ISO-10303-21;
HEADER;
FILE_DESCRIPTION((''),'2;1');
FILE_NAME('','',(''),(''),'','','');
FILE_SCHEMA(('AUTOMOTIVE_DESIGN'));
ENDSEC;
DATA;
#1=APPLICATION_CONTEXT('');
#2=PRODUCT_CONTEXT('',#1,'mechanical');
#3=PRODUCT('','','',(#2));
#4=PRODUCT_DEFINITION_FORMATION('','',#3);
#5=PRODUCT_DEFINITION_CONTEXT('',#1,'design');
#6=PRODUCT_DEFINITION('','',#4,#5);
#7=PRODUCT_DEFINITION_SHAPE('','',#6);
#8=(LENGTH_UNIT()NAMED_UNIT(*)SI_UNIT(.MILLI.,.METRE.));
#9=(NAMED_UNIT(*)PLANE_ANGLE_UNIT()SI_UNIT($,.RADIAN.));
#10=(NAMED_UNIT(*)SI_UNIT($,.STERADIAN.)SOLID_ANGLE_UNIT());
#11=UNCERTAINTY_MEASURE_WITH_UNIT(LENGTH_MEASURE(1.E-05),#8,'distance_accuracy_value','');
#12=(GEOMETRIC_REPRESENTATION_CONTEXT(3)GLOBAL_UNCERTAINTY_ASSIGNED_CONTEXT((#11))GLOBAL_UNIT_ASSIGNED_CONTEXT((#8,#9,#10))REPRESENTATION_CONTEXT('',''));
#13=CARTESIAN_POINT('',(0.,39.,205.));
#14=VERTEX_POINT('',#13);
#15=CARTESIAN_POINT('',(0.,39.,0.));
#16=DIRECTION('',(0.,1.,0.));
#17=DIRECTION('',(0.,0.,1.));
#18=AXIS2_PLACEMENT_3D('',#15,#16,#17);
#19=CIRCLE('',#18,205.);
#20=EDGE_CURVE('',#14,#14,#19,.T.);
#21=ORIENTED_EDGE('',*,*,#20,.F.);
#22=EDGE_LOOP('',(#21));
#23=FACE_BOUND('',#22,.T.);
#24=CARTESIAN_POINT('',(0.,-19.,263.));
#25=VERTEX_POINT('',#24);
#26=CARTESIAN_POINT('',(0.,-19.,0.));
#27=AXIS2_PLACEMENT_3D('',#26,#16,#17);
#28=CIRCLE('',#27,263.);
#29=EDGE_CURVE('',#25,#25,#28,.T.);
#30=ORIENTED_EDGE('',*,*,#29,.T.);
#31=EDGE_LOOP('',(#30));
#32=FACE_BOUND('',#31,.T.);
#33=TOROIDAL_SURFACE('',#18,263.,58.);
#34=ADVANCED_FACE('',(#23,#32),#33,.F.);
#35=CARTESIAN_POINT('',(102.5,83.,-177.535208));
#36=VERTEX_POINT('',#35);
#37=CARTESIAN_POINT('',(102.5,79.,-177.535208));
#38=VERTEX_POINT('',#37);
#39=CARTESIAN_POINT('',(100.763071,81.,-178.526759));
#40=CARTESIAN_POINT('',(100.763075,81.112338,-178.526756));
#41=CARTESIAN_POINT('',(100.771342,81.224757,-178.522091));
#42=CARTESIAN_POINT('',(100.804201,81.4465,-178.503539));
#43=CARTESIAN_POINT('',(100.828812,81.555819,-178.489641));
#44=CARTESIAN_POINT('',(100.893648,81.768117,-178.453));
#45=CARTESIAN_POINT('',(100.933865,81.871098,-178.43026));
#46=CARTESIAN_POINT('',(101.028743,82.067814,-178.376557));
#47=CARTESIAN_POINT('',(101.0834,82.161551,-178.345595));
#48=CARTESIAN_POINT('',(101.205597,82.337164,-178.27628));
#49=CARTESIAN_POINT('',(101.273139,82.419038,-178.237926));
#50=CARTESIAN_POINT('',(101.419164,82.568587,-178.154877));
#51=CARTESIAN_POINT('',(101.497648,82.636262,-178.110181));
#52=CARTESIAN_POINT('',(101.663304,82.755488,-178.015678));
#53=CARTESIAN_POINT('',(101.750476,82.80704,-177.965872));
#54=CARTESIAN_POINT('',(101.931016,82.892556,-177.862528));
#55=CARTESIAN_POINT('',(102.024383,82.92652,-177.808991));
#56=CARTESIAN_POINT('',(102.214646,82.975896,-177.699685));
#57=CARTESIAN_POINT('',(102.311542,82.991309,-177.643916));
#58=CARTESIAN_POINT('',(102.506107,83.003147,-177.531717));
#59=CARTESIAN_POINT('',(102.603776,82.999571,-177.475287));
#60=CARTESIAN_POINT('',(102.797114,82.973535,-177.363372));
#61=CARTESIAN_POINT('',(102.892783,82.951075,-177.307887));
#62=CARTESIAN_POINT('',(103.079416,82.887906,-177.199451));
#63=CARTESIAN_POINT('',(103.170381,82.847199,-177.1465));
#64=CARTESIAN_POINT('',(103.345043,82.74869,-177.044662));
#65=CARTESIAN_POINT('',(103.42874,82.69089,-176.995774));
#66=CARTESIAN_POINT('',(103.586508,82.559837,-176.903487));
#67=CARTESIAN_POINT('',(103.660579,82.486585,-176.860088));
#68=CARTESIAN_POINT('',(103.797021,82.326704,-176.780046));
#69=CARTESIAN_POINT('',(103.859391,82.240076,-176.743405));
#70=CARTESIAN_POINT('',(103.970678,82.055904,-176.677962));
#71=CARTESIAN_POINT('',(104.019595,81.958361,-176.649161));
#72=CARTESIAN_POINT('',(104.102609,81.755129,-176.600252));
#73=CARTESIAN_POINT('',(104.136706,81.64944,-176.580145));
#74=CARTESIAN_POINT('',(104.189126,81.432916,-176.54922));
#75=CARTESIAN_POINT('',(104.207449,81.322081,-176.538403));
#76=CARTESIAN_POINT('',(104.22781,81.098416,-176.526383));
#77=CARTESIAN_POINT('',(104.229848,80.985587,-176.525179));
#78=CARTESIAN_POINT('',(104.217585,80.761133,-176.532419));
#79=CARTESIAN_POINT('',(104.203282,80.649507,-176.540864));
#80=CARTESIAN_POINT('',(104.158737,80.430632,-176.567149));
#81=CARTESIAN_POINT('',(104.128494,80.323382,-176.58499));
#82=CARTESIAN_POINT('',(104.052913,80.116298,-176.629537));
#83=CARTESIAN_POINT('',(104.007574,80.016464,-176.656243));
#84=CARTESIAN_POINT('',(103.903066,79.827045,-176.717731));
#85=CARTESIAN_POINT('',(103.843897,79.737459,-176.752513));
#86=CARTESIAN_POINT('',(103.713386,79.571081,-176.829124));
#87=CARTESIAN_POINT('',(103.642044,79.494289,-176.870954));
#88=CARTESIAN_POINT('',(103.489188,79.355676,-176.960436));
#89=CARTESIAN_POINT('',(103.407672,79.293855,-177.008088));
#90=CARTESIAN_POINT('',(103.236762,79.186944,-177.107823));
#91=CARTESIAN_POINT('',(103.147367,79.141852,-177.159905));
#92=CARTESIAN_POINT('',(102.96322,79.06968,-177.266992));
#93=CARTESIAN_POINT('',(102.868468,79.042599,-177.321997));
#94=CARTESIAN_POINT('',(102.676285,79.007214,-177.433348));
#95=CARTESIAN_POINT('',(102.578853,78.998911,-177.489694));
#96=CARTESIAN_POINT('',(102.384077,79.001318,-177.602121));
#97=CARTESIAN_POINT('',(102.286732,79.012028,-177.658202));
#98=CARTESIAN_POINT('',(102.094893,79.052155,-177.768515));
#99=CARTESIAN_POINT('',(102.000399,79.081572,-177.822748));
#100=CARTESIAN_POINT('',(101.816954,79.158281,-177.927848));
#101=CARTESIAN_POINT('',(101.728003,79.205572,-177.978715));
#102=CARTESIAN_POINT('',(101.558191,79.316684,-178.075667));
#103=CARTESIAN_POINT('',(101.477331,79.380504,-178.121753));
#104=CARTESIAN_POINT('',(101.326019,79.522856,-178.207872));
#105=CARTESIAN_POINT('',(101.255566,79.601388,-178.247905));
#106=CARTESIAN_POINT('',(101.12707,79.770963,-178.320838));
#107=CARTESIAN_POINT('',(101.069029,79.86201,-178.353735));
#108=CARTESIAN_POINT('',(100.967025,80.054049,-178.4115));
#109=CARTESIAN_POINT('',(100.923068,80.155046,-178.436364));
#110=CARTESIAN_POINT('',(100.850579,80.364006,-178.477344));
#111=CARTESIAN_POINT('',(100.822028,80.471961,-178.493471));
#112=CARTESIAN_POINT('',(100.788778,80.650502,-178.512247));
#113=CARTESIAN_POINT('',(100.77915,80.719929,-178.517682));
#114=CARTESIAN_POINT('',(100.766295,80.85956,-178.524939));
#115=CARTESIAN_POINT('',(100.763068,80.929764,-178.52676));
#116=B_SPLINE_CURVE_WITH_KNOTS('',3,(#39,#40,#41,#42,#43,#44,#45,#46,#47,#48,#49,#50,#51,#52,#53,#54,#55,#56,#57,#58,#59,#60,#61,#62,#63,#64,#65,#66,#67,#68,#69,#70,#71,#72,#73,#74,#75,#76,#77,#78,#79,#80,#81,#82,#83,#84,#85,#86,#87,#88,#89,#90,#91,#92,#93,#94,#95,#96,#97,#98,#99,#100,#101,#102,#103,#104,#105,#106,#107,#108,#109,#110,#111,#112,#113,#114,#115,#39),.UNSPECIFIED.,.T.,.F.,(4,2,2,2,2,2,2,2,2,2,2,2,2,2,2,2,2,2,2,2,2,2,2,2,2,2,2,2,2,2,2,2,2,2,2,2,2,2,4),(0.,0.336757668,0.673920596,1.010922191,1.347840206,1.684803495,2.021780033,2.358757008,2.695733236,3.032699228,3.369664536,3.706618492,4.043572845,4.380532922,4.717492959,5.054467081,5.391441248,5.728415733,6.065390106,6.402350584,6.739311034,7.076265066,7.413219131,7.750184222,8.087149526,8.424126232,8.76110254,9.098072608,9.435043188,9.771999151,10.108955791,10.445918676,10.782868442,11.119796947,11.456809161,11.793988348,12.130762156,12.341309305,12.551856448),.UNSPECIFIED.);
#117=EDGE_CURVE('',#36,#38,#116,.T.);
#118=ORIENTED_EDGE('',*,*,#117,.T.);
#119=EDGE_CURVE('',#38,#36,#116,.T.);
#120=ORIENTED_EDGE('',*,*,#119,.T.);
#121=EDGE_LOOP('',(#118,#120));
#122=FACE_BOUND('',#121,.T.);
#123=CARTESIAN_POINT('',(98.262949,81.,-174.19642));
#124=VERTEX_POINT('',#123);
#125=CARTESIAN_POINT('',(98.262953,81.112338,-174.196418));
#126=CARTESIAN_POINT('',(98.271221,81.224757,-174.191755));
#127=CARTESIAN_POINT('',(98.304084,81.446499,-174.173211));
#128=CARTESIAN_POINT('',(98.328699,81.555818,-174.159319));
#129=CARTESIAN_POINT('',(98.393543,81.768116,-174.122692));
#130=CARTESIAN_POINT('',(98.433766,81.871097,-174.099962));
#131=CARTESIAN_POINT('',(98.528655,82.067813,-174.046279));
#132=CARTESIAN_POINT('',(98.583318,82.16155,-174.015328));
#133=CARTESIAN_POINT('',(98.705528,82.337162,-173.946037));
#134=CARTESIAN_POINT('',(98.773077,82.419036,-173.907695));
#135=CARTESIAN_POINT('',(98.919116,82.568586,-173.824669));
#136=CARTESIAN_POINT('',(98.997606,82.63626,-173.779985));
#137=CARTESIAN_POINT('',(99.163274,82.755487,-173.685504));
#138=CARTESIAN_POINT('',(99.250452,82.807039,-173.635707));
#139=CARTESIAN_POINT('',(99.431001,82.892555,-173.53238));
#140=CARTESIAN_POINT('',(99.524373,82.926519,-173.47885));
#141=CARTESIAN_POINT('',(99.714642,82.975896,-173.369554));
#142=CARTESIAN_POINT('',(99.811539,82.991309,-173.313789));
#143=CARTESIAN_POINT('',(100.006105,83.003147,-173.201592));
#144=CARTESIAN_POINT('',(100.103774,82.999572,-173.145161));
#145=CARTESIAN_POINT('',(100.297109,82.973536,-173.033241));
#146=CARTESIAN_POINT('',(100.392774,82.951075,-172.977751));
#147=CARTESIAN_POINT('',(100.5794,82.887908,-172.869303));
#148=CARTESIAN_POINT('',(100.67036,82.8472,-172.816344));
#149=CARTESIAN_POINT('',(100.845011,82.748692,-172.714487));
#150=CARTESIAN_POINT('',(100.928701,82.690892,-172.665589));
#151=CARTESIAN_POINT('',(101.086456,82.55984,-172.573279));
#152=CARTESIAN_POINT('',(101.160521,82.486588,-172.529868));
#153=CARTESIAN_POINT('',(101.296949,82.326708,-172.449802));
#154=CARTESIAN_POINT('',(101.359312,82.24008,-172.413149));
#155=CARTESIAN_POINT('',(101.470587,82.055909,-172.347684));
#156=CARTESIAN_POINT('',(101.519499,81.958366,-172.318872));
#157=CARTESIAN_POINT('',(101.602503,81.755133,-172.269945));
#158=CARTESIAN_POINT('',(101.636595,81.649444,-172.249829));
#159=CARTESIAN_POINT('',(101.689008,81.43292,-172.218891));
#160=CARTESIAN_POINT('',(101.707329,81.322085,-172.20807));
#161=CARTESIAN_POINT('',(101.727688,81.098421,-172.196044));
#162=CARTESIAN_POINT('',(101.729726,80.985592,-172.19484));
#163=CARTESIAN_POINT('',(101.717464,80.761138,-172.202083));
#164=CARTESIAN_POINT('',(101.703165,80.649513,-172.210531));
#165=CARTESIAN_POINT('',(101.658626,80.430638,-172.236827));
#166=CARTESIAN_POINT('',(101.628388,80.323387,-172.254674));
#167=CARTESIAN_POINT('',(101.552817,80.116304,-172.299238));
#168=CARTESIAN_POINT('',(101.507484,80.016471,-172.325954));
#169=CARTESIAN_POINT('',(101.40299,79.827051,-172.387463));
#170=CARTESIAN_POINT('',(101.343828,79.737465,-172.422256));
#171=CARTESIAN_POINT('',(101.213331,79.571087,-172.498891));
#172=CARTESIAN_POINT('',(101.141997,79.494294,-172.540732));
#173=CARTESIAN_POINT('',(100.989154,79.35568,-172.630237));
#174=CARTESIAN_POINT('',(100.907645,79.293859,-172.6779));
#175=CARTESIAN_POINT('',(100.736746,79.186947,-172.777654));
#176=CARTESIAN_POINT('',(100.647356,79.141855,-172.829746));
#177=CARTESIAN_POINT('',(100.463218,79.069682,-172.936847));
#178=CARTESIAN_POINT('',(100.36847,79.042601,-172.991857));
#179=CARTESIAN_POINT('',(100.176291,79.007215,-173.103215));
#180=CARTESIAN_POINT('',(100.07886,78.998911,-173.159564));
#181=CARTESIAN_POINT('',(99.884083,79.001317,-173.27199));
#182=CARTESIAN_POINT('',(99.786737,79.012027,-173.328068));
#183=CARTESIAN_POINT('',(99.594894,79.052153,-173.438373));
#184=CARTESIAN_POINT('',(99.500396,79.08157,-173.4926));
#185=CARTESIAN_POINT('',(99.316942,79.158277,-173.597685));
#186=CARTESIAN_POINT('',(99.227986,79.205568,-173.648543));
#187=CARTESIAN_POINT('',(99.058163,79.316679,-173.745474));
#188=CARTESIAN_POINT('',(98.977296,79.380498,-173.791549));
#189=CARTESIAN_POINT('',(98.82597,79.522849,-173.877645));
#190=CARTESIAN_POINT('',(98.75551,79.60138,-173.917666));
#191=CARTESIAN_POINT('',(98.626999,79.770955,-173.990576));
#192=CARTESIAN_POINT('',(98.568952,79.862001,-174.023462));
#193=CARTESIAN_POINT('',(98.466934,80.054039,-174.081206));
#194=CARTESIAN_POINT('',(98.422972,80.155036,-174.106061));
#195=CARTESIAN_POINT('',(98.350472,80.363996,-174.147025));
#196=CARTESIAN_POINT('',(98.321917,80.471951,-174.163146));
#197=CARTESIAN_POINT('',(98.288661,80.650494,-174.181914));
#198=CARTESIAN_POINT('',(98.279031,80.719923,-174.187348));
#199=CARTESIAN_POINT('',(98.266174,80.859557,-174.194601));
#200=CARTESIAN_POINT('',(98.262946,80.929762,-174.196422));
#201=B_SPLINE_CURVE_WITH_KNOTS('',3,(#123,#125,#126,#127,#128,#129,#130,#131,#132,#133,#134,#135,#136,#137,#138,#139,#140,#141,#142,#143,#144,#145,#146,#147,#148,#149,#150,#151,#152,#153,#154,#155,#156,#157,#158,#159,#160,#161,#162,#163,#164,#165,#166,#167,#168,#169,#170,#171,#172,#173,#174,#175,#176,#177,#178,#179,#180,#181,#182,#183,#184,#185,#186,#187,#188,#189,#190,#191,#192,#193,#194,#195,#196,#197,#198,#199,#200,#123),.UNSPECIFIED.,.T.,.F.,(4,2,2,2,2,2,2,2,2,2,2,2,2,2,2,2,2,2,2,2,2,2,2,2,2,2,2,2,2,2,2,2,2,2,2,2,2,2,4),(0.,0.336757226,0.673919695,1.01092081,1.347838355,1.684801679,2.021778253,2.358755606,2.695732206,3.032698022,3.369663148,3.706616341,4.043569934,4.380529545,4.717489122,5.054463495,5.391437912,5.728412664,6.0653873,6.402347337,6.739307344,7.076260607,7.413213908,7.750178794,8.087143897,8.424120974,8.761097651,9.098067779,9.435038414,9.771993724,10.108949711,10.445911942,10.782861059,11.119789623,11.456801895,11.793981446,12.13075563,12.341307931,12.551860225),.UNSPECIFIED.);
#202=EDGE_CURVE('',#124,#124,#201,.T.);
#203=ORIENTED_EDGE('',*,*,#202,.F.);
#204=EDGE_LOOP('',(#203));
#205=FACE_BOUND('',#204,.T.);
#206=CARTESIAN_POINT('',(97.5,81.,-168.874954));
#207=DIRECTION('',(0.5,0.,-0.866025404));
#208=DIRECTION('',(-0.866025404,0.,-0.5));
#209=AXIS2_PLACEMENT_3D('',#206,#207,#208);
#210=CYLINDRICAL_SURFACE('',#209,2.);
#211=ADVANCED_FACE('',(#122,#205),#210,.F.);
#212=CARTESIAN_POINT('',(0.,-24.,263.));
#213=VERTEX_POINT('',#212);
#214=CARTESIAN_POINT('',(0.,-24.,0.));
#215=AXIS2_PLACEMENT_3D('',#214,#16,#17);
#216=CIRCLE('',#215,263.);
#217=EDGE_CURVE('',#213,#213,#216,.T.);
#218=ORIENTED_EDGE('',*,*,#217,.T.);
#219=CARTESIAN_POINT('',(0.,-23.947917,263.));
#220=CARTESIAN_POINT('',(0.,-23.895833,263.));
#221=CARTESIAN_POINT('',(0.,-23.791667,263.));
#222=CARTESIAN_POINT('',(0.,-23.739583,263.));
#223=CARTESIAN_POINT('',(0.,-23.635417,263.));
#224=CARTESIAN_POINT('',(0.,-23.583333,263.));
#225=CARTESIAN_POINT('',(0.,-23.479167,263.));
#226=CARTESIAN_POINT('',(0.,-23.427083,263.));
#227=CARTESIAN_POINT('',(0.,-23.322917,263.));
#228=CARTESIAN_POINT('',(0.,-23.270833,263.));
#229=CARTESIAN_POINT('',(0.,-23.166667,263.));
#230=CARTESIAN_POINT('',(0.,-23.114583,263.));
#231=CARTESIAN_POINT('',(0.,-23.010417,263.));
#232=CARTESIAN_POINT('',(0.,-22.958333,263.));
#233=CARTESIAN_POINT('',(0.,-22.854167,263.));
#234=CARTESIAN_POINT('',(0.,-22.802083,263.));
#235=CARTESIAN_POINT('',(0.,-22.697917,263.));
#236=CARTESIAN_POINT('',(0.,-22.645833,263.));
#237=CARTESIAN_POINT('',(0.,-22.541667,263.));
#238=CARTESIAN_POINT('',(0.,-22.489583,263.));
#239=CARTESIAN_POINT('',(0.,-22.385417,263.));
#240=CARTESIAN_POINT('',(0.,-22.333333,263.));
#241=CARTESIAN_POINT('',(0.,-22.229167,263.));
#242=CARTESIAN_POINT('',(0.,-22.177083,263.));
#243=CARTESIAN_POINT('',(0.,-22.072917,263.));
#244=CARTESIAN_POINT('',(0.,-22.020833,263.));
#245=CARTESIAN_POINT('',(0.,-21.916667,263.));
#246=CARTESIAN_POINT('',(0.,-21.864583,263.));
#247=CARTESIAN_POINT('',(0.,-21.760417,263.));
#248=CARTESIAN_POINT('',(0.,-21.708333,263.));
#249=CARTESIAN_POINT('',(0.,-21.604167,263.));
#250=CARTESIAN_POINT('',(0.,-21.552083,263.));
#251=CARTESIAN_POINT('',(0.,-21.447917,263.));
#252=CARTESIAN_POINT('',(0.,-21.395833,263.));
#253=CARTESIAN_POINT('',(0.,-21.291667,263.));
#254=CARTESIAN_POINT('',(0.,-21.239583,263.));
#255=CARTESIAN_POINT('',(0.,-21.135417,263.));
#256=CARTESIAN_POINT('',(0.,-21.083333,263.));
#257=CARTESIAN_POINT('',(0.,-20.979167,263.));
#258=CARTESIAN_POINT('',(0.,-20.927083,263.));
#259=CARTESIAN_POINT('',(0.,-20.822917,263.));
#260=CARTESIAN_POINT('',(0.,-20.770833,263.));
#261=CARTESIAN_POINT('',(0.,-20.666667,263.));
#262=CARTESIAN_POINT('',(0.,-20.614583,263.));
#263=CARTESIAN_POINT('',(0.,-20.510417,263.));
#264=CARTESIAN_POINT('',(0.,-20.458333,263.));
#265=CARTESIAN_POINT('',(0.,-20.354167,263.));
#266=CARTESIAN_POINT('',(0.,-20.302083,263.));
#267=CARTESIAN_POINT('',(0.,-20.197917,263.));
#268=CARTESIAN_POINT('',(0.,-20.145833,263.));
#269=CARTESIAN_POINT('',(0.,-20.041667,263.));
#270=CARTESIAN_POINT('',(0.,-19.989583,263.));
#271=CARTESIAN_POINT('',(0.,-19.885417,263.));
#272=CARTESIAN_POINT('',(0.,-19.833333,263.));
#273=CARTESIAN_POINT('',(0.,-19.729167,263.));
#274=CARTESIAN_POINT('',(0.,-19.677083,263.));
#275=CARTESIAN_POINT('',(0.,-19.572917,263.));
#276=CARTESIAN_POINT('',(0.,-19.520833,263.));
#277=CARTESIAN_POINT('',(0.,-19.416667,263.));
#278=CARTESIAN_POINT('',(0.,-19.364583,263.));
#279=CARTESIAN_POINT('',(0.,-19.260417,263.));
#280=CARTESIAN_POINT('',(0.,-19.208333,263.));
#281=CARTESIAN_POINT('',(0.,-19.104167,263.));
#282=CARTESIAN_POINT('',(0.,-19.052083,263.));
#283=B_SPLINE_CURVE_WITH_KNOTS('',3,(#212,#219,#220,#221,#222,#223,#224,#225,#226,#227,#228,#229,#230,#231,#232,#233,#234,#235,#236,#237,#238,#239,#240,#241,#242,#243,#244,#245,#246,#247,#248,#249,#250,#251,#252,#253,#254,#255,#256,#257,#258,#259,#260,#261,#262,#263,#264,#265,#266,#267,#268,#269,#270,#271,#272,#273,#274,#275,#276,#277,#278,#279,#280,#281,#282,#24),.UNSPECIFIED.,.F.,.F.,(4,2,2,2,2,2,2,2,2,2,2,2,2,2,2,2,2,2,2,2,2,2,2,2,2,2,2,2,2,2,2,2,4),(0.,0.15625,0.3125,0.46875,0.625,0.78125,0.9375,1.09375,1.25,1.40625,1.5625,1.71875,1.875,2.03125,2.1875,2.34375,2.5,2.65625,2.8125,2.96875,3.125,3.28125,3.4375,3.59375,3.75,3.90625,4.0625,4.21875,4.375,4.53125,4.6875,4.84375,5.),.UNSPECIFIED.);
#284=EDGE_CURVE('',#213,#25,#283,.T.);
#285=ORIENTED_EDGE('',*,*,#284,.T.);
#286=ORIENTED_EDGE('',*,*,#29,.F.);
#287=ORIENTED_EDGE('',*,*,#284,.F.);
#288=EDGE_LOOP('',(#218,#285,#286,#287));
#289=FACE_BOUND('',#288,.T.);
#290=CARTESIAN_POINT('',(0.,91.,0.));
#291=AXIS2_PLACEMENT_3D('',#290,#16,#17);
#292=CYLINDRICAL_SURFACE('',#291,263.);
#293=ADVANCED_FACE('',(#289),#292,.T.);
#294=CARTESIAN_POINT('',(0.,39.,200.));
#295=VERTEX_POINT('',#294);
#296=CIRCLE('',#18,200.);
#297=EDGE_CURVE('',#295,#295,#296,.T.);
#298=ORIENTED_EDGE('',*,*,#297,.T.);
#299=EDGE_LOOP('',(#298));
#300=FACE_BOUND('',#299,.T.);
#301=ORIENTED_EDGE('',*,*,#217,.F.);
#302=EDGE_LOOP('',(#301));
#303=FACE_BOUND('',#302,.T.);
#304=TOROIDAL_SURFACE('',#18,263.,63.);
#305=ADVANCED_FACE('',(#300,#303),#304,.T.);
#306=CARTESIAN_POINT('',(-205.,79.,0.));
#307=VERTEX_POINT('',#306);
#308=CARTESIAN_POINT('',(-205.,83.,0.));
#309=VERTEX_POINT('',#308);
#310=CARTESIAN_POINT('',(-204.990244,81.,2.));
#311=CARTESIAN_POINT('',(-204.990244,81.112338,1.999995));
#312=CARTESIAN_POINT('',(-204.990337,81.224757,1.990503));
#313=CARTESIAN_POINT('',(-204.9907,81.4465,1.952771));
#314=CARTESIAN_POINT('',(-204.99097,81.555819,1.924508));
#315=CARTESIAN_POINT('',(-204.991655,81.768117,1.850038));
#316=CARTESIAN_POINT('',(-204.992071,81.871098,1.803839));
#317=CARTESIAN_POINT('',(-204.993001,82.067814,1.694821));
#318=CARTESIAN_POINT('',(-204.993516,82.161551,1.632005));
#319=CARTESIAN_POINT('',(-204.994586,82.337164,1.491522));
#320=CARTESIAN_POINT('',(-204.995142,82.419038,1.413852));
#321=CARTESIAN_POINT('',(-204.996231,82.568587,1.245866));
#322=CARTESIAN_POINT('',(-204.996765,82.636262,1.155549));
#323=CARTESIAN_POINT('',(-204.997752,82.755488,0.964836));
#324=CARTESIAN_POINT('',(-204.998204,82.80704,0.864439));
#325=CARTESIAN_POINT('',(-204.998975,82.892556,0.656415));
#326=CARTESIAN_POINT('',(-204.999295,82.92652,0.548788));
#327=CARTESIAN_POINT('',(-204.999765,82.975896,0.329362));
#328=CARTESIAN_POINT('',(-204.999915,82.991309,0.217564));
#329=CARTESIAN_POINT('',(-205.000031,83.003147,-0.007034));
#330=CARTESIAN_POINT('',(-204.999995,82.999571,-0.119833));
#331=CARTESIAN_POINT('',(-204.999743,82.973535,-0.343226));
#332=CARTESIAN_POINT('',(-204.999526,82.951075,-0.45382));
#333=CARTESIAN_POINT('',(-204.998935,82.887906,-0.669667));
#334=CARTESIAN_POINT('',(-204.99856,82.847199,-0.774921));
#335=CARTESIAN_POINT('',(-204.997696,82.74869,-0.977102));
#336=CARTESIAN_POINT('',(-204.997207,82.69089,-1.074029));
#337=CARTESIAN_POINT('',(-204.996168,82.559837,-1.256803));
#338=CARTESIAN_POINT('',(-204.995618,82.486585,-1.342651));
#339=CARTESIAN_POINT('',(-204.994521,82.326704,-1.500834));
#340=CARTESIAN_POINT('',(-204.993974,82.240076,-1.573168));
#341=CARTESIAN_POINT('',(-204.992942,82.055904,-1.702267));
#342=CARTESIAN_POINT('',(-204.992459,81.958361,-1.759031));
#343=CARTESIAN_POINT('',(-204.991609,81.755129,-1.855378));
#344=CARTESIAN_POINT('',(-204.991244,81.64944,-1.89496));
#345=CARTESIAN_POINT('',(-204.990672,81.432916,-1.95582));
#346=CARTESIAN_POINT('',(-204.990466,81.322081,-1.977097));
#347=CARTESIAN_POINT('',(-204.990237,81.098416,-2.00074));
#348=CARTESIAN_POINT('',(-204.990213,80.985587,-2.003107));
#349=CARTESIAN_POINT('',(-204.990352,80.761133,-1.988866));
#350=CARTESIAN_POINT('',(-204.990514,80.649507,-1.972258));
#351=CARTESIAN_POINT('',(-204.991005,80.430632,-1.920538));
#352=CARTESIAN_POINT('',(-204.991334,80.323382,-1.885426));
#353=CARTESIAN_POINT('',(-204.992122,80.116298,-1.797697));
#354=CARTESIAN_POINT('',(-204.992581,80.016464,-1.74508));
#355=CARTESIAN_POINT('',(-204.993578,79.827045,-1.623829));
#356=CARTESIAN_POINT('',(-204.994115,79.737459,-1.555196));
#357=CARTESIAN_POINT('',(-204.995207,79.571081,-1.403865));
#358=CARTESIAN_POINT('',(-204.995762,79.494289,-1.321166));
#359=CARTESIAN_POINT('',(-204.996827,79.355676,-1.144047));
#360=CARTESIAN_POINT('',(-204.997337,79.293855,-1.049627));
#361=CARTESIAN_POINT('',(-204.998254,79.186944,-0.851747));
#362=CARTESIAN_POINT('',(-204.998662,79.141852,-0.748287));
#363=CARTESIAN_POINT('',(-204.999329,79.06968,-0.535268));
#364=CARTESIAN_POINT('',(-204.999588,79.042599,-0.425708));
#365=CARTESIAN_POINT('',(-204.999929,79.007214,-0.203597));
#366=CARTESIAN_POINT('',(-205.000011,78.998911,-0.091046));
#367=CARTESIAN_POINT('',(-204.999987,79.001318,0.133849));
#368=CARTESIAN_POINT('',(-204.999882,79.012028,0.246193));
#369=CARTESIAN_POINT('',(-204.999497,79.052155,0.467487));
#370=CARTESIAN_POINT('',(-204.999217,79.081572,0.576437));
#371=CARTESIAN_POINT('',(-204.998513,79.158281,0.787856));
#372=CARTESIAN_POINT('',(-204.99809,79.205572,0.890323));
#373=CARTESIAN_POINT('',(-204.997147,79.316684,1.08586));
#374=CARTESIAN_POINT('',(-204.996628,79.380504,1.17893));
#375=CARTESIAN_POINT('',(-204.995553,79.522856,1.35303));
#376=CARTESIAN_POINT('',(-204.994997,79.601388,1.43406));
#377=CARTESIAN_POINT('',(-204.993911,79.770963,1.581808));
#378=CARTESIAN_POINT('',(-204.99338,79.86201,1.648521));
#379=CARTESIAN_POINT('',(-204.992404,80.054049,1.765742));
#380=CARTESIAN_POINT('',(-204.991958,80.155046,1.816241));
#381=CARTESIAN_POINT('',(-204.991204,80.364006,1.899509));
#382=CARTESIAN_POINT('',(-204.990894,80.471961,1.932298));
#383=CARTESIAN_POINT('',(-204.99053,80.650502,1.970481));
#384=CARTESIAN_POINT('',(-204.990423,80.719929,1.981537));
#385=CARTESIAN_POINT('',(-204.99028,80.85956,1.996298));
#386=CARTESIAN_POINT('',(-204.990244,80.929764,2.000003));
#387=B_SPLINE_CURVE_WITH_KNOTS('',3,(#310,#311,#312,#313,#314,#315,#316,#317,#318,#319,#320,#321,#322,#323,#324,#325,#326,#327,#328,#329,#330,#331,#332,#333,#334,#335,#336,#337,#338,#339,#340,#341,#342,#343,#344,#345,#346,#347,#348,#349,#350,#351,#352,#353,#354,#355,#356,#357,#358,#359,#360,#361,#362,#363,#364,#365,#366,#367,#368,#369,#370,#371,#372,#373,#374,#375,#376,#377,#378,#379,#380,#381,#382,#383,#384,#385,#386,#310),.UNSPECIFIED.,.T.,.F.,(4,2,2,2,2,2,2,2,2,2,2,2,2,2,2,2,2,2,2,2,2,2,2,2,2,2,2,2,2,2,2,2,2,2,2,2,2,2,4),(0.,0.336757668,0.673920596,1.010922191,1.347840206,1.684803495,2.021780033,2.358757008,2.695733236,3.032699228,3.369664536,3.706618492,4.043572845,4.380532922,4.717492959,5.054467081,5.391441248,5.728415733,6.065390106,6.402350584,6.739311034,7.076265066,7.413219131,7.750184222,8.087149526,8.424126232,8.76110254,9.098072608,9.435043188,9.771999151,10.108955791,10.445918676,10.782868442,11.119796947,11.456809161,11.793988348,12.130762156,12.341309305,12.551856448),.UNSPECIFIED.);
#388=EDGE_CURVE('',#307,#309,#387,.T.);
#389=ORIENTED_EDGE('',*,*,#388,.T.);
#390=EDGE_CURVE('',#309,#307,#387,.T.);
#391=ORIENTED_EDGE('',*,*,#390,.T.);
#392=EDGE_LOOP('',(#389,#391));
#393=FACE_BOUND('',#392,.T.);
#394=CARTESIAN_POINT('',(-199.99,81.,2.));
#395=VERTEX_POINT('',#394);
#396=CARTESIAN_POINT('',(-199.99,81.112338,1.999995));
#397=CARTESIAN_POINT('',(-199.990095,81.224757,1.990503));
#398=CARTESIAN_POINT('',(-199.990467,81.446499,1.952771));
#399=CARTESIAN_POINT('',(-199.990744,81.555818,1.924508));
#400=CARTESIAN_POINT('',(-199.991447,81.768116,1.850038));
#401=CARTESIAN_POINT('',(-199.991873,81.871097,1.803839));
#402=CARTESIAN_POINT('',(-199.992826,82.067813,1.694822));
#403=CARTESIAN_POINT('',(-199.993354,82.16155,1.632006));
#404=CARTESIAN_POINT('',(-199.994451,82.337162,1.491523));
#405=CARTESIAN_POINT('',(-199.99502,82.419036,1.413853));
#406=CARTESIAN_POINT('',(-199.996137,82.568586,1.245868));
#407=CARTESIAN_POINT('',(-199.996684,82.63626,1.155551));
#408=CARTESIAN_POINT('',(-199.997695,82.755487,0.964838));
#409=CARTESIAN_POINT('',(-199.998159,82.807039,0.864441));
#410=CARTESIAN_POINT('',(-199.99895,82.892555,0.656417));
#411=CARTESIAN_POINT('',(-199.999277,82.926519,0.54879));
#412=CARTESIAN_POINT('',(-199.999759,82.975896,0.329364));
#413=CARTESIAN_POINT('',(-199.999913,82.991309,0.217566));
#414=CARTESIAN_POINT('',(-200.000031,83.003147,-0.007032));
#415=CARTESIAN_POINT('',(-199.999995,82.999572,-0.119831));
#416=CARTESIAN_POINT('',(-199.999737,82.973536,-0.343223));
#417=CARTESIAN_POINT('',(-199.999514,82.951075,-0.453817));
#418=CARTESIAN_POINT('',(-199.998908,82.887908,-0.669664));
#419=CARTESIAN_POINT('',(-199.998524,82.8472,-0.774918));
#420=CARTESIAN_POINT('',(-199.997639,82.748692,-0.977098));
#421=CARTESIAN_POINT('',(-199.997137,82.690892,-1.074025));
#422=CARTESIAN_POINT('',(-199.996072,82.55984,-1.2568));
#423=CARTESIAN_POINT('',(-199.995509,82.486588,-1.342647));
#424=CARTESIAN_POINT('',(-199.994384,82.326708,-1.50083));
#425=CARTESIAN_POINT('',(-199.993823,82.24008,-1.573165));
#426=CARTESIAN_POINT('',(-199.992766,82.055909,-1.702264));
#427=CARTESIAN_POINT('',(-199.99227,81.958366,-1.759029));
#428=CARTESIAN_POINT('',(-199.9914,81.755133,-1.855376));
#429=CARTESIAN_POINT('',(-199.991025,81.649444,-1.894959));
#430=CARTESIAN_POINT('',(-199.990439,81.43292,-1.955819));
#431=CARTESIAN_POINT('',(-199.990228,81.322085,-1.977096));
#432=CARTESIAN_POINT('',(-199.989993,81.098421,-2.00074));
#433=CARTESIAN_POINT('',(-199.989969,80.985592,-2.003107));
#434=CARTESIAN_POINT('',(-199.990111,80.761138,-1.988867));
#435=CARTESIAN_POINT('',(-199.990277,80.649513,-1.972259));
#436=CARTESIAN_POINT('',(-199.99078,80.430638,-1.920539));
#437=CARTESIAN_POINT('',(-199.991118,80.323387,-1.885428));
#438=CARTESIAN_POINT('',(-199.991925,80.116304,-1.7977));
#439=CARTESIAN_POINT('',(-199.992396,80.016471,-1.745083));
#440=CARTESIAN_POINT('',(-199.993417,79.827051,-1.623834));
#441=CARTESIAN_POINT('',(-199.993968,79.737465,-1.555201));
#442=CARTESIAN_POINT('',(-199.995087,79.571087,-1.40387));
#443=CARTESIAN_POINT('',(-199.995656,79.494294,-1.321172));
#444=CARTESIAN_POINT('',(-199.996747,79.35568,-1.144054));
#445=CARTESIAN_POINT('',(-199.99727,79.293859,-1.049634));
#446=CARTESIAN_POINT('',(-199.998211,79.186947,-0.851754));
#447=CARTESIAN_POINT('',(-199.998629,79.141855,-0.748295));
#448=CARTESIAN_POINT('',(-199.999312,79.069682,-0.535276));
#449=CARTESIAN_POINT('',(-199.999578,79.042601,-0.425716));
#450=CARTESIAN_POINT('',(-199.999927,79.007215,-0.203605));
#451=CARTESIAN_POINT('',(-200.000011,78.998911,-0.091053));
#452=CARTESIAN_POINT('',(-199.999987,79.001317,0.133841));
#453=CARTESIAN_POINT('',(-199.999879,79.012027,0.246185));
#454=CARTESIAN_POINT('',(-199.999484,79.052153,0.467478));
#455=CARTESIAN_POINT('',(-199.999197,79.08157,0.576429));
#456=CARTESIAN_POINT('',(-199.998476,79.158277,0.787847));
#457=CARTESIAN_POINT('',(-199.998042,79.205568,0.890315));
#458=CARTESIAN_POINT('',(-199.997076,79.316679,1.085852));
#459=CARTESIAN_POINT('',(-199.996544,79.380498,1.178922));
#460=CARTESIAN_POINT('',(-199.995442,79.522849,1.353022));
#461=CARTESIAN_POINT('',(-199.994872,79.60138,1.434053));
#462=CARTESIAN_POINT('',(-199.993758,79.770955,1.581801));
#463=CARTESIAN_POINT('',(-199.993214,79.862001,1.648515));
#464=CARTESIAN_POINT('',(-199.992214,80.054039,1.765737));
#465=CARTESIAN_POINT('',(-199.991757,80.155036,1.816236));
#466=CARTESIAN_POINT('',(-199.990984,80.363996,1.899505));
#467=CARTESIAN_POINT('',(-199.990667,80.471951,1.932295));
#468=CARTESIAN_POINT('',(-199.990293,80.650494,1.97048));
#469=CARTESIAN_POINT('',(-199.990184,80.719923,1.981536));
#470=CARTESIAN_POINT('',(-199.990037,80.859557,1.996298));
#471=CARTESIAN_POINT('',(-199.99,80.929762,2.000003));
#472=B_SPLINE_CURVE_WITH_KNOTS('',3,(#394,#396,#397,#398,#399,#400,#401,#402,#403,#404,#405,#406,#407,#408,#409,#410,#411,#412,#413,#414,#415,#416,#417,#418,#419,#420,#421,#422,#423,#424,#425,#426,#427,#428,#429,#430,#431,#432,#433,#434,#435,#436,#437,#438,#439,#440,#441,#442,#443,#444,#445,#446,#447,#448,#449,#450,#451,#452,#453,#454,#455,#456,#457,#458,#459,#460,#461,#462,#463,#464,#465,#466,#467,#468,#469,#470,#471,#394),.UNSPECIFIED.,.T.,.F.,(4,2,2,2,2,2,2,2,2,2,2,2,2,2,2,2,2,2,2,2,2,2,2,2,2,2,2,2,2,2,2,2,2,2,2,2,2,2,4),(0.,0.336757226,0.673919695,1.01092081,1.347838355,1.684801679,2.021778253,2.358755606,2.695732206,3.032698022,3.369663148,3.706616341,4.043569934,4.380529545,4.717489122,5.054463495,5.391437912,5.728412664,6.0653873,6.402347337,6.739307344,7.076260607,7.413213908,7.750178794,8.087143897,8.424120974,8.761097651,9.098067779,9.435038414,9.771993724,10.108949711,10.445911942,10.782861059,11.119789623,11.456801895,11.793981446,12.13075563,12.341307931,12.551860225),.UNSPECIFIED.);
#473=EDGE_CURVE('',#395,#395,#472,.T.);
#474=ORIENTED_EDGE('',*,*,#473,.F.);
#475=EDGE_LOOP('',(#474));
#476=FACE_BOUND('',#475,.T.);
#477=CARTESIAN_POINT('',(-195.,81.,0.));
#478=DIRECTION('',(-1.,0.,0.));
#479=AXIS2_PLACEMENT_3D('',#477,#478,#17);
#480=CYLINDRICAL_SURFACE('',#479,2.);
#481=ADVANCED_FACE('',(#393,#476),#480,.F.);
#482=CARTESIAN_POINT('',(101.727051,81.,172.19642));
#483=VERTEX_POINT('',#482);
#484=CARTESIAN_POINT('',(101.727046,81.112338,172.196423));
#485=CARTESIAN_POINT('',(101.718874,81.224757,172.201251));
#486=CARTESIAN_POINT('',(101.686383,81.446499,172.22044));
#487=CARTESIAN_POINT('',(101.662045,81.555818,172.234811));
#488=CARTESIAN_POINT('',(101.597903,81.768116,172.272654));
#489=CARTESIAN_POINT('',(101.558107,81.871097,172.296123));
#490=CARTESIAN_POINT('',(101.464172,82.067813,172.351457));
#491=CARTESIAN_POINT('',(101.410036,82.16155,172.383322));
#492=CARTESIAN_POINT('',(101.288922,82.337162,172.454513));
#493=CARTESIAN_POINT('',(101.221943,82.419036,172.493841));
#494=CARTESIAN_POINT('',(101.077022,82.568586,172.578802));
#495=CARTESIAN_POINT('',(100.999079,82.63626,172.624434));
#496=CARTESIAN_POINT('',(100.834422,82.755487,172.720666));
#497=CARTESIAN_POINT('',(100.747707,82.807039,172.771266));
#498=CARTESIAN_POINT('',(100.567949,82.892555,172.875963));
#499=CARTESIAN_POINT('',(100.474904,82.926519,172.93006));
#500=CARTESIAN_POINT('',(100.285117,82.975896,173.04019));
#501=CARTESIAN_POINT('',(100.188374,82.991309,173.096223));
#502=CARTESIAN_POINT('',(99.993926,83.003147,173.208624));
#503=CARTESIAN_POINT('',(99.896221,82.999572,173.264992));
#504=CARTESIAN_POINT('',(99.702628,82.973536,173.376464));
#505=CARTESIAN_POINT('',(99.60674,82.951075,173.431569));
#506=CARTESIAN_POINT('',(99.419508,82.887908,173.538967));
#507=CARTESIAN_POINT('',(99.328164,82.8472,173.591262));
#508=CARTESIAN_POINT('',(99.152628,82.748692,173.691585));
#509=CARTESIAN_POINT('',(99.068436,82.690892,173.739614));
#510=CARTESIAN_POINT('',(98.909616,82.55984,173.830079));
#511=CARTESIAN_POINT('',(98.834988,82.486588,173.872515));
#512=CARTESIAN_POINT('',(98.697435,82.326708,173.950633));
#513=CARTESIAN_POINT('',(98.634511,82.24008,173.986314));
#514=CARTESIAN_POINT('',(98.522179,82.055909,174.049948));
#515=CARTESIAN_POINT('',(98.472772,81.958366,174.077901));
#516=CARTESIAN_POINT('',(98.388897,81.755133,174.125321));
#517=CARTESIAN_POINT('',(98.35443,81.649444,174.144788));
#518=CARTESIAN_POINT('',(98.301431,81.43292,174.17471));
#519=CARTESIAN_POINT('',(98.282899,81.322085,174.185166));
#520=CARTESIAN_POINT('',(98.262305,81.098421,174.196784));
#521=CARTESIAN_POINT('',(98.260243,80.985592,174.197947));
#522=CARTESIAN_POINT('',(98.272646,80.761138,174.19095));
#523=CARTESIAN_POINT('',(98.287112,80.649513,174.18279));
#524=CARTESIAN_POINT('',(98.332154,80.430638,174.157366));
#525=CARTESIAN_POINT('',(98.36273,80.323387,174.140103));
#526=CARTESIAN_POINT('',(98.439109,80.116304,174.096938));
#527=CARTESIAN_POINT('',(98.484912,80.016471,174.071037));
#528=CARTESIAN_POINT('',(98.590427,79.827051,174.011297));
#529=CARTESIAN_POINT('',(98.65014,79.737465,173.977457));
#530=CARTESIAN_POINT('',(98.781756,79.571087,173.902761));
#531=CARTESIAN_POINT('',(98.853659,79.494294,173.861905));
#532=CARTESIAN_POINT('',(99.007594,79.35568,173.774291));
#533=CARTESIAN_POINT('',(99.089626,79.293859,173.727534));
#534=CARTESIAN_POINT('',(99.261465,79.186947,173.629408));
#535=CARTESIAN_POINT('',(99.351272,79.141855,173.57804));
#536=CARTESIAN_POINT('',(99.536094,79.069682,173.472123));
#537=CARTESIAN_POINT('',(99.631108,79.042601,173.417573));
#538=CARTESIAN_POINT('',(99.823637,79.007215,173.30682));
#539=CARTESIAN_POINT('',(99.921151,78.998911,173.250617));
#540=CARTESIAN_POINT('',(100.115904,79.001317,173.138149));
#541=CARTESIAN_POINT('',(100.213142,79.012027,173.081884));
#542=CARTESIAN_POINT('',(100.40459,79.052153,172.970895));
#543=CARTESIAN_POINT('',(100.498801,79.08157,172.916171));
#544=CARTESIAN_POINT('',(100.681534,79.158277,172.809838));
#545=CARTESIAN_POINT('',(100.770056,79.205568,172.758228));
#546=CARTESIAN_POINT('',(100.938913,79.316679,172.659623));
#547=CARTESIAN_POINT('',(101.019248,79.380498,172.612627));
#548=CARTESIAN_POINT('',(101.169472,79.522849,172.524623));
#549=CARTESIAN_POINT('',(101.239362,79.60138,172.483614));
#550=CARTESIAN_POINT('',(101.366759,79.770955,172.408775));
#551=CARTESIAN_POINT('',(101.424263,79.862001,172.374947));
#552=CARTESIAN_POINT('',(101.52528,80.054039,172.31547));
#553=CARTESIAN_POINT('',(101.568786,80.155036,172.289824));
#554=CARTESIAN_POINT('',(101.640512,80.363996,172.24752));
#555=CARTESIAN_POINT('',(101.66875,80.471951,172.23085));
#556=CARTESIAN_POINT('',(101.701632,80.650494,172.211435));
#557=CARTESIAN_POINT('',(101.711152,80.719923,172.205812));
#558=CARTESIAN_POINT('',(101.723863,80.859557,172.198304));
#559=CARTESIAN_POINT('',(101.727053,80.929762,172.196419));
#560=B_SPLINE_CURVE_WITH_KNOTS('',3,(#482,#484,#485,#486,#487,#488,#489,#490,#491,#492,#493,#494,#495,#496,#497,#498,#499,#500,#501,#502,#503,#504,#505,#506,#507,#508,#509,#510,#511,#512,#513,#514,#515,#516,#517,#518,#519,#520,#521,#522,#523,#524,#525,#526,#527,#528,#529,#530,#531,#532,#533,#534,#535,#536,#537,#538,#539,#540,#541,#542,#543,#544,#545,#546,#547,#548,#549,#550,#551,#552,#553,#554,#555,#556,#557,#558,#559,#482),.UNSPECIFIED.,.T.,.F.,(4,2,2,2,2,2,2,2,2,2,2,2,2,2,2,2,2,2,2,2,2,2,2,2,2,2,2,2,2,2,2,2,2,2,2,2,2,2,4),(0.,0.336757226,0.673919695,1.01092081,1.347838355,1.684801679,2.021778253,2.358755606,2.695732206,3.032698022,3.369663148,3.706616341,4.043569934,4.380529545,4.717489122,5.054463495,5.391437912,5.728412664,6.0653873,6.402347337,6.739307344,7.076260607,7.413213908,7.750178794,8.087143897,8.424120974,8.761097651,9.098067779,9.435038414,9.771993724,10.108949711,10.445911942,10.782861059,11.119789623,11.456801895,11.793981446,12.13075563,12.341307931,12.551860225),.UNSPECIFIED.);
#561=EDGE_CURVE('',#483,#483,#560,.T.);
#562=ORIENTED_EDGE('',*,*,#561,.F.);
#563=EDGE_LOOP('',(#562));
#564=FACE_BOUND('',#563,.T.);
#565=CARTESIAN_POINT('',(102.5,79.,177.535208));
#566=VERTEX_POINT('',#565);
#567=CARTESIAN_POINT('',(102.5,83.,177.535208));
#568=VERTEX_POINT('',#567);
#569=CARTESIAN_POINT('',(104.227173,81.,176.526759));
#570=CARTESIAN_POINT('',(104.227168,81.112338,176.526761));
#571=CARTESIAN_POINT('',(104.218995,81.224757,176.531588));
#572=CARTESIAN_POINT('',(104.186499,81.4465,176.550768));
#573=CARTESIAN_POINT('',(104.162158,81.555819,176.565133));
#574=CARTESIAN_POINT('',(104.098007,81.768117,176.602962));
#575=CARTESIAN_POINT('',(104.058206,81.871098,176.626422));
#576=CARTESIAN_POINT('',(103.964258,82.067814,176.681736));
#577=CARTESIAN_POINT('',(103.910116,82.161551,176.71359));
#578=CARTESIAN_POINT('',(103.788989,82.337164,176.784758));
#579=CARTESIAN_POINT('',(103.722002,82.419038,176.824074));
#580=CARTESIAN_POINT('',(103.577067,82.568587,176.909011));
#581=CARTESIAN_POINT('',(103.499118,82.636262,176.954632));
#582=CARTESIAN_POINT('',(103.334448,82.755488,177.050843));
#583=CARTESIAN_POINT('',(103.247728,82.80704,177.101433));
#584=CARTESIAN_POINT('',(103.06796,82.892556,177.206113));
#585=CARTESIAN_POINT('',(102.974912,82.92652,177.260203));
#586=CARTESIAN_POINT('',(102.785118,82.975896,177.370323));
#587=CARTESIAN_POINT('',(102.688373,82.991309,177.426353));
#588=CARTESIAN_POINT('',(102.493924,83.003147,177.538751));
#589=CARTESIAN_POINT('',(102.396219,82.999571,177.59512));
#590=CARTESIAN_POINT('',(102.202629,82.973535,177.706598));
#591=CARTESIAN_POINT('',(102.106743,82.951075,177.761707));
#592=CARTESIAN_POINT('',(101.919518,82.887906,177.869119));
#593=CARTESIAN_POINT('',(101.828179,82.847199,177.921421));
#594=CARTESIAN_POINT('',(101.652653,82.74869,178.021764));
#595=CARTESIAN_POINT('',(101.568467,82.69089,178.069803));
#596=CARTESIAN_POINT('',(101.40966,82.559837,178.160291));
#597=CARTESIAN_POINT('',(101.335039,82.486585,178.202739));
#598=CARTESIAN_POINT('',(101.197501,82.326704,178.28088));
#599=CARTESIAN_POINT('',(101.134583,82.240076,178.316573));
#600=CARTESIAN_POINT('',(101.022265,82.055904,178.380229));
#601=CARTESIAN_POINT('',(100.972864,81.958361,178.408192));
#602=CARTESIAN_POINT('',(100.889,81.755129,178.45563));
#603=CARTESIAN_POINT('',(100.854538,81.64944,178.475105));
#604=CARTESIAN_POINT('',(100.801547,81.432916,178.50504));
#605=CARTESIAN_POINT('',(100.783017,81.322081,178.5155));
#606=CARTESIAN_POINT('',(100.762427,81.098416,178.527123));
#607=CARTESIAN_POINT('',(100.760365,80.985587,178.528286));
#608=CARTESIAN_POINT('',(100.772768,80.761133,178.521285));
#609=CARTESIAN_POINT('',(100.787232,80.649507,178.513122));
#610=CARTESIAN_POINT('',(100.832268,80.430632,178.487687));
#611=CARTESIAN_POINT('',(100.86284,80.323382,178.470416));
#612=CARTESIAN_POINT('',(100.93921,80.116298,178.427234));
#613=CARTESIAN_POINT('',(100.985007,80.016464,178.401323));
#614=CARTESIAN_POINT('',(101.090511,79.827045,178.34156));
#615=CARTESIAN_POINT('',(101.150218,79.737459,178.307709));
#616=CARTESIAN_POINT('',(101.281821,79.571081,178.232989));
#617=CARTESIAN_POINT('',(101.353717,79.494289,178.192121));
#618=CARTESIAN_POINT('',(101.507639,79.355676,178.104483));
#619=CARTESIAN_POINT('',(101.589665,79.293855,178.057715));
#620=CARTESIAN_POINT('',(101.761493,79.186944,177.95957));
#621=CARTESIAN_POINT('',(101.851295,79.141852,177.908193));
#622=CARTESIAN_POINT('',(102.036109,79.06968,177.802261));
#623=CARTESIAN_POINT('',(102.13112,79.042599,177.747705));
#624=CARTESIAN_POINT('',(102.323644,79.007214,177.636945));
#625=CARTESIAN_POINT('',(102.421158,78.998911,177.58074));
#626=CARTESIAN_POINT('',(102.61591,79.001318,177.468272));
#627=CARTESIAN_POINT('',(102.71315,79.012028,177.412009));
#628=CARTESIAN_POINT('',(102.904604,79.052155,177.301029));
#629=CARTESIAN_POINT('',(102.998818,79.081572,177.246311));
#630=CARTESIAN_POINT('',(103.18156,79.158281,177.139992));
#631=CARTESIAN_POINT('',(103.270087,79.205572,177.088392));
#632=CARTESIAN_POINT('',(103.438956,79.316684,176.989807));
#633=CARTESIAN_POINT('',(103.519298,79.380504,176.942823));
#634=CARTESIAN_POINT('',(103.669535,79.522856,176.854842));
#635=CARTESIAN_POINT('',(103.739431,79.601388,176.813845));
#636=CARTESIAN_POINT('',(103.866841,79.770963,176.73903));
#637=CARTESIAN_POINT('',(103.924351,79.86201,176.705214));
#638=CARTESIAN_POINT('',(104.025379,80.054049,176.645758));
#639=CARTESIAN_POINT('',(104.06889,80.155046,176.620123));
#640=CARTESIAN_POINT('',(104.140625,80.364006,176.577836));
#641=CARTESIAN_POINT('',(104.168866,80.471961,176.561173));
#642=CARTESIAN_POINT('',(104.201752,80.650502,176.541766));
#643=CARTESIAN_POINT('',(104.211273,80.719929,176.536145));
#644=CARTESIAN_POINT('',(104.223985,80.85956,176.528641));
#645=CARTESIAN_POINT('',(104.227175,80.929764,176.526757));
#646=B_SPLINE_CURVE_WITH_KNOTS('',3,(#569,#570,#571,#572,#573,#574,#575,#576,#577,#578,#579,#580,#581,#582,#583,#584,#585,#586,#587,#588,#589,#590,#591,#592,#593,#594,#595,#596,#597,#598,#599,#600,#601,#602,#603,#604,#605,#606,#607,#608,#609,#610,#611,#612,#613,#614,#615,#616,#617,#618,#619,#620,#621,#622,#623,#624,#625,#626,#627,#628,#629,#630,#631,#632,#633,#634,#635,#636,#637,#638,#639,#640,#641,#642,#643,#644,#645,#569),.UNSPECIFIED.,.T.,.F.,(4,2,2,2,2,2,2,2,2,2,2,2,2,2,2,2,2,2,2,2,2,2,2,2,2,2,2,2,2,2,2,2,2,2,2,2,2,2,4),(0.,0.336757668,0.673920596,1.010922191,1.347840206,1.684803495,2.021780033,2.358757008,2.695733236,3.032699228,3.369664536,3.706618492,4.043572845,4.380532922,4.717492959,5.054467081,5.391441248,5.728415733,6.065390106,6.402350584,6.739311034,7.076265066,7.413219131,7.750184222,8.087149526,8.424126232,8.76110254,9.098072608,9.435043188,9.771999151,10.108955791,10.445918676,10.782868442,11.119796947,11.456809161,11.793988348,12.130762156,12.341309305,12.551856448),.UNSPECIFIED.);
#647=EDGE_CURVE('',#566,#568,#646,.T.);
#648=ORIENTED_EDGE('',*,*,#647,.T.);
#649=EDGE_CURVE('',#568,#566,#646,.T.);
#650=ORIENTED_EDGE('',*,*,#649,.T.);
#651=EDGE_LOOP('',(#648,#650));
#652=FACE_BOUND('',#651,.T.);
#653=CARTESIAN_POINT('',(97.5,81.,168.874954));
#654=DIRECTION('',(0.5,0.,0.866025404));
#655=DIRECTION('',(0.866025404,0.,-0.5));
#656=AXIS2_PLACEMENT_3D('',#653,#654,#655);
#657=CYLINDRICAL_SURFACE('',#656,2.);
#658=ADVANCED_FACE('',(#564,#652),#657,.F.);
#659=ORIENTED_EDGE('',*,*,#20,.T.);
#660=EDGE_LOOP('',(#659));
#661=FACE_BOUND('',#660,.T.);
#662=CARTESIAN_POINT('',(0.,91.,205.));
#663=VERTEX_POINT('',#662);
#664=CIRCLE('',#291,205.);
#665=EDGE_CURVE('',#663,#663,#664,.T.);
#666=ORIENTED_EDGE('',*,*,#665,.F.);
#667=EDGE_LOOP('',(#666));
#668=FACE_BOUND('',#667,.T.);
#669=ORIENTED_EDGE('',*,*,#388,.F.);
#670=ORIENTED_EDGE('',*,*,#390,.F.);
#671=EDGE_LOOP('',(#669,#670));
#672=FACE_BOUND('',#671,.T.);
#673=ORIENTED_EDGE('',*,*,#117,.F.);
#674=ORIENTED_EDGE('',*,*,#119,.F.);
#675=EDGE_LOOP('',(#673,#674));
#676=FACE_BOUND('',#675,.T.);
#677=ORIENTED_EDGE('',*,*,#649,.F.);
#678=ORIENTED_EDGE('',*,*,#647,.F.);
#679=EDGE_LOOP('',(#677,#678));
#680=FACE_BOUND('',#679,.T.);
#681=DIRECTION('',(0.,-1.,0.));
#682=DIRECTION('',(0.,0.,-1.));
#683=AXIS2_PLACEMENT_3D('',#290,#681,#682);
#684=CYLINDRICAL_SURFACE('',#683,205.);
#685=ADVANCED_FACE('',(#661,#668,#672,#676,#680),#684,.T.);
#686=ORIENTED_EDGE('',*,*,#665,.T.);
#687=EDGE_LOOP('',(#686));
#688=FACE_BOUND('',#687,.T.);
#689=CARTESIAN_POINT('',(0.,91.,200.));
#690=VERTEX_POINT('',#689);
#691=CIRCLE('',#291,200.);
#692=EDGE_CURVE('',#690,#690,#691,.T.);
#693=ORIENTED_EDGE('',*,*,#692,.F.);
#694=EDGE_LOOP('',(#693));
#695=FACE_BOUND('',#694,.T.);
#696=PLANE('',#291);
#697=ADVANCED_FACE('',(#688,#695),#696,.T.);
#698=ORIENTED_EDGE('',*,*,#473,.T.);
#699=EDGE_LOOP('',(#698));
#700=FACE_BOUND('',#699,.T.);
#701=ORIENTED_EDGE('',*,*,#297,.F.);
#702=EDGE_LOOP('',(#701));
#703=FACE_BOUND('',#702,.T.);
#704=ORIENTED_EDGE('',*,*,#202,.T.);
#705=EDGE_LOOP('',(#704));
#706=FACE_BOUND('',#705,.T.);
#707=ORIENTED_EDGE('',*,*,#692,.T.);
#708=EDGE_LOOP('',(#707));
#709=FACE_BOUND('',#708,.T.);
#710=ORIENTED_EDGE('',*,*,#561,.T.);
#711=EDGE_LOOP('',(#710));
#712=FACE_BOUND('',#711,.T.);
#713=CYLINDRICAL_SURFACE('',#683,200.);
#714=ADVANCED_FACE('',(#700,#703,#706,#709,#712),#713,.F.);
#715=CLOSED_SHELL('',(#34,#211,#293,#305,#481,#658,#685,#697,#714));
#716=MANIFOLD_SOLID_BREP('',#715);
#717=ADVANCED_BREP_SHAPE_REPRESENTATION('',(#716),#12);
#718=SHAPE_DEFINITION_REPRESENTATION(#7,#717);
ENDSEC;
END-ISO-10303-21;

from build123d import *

# Parameters (mm, degrees)
LOFT_THIN1_START       = 39
LOFT_THIN1_OUTLINE_R   = 205
LOFT_THIN1_OUTLINE_R_2 = 200
LOFT_THIN1_DEPTH       = 52
SKETCH6_R              = 2
CUT_EXTRUDE1_DEPTH     = 10
CIRPATTERN1_COUNT      = 3


# Read off the part's stored shape, not the designer's step: Loft-Thin1
with BuildPart() as part:
    # Loft-Thin1 outline → Loft-Thin1 (new body)
    with BuildSketch(Plane(origin=(0, 0, 0), x_dir=(1, 0, 0), z_dir=(0, 1, 0)).offset(LOFT_THIN1_START)):
        Circle(LOFT_THIN1_OUTLINE_R)
        Circle(LOFT_THIN1_OUTLINE_R_2, mode=Mode.SUBTRACT)
    extrude(amount=LOFT_THIN1_DEPTH)

    # Sketch5 → Revolve-Thin2 (revolve)
    with BuildSketch(Plane.XY, mode=Mode.PRIVATE) as revolve_thin2_sk:
        with BuildLine():
            ThreePointArc((205, 39), (221.987806691, -2.012193309), (263, -19))
            Line((263, -19), (263, -24))
            ThreePointArc((263, -24), (218.452272785, -5.547727215), (200, 39))
            Line((200, 39), (205, 39))
        make_face()
    revolve(revolve_thin2_sk.sketch.rotate(Axis((0, 91, 0), (0, -1, 0)), 90), axis=Axis((0, 91, 0), (0, -1, 0)))

    # Sketch6 → Cut-Extrude1 (cut)
    with BuildSketch(Plane.ZY.offset(205)):
        with Locations((0, 81)):
            Circle(SKETCH6_R)
    cut_extrude1 = extrude(amount=-CUT_EXTRUDE1_DEPTH, mode=Mode.SUBTRACT)

    # CirPattern1: Cut-Extrude1 ×3 about axis
    cirpattern1_axis = Axis((0, 91, 0), (0, 1, 0))
    for i in range(1, CIRPATTERN1_COUNT):
        add(cut_extrude1.rotate(cirpattern1_axis, i * 360 / CIRPATTERN1_COUNT), mode=Mode.SUBTRACT)


solid = part.part
